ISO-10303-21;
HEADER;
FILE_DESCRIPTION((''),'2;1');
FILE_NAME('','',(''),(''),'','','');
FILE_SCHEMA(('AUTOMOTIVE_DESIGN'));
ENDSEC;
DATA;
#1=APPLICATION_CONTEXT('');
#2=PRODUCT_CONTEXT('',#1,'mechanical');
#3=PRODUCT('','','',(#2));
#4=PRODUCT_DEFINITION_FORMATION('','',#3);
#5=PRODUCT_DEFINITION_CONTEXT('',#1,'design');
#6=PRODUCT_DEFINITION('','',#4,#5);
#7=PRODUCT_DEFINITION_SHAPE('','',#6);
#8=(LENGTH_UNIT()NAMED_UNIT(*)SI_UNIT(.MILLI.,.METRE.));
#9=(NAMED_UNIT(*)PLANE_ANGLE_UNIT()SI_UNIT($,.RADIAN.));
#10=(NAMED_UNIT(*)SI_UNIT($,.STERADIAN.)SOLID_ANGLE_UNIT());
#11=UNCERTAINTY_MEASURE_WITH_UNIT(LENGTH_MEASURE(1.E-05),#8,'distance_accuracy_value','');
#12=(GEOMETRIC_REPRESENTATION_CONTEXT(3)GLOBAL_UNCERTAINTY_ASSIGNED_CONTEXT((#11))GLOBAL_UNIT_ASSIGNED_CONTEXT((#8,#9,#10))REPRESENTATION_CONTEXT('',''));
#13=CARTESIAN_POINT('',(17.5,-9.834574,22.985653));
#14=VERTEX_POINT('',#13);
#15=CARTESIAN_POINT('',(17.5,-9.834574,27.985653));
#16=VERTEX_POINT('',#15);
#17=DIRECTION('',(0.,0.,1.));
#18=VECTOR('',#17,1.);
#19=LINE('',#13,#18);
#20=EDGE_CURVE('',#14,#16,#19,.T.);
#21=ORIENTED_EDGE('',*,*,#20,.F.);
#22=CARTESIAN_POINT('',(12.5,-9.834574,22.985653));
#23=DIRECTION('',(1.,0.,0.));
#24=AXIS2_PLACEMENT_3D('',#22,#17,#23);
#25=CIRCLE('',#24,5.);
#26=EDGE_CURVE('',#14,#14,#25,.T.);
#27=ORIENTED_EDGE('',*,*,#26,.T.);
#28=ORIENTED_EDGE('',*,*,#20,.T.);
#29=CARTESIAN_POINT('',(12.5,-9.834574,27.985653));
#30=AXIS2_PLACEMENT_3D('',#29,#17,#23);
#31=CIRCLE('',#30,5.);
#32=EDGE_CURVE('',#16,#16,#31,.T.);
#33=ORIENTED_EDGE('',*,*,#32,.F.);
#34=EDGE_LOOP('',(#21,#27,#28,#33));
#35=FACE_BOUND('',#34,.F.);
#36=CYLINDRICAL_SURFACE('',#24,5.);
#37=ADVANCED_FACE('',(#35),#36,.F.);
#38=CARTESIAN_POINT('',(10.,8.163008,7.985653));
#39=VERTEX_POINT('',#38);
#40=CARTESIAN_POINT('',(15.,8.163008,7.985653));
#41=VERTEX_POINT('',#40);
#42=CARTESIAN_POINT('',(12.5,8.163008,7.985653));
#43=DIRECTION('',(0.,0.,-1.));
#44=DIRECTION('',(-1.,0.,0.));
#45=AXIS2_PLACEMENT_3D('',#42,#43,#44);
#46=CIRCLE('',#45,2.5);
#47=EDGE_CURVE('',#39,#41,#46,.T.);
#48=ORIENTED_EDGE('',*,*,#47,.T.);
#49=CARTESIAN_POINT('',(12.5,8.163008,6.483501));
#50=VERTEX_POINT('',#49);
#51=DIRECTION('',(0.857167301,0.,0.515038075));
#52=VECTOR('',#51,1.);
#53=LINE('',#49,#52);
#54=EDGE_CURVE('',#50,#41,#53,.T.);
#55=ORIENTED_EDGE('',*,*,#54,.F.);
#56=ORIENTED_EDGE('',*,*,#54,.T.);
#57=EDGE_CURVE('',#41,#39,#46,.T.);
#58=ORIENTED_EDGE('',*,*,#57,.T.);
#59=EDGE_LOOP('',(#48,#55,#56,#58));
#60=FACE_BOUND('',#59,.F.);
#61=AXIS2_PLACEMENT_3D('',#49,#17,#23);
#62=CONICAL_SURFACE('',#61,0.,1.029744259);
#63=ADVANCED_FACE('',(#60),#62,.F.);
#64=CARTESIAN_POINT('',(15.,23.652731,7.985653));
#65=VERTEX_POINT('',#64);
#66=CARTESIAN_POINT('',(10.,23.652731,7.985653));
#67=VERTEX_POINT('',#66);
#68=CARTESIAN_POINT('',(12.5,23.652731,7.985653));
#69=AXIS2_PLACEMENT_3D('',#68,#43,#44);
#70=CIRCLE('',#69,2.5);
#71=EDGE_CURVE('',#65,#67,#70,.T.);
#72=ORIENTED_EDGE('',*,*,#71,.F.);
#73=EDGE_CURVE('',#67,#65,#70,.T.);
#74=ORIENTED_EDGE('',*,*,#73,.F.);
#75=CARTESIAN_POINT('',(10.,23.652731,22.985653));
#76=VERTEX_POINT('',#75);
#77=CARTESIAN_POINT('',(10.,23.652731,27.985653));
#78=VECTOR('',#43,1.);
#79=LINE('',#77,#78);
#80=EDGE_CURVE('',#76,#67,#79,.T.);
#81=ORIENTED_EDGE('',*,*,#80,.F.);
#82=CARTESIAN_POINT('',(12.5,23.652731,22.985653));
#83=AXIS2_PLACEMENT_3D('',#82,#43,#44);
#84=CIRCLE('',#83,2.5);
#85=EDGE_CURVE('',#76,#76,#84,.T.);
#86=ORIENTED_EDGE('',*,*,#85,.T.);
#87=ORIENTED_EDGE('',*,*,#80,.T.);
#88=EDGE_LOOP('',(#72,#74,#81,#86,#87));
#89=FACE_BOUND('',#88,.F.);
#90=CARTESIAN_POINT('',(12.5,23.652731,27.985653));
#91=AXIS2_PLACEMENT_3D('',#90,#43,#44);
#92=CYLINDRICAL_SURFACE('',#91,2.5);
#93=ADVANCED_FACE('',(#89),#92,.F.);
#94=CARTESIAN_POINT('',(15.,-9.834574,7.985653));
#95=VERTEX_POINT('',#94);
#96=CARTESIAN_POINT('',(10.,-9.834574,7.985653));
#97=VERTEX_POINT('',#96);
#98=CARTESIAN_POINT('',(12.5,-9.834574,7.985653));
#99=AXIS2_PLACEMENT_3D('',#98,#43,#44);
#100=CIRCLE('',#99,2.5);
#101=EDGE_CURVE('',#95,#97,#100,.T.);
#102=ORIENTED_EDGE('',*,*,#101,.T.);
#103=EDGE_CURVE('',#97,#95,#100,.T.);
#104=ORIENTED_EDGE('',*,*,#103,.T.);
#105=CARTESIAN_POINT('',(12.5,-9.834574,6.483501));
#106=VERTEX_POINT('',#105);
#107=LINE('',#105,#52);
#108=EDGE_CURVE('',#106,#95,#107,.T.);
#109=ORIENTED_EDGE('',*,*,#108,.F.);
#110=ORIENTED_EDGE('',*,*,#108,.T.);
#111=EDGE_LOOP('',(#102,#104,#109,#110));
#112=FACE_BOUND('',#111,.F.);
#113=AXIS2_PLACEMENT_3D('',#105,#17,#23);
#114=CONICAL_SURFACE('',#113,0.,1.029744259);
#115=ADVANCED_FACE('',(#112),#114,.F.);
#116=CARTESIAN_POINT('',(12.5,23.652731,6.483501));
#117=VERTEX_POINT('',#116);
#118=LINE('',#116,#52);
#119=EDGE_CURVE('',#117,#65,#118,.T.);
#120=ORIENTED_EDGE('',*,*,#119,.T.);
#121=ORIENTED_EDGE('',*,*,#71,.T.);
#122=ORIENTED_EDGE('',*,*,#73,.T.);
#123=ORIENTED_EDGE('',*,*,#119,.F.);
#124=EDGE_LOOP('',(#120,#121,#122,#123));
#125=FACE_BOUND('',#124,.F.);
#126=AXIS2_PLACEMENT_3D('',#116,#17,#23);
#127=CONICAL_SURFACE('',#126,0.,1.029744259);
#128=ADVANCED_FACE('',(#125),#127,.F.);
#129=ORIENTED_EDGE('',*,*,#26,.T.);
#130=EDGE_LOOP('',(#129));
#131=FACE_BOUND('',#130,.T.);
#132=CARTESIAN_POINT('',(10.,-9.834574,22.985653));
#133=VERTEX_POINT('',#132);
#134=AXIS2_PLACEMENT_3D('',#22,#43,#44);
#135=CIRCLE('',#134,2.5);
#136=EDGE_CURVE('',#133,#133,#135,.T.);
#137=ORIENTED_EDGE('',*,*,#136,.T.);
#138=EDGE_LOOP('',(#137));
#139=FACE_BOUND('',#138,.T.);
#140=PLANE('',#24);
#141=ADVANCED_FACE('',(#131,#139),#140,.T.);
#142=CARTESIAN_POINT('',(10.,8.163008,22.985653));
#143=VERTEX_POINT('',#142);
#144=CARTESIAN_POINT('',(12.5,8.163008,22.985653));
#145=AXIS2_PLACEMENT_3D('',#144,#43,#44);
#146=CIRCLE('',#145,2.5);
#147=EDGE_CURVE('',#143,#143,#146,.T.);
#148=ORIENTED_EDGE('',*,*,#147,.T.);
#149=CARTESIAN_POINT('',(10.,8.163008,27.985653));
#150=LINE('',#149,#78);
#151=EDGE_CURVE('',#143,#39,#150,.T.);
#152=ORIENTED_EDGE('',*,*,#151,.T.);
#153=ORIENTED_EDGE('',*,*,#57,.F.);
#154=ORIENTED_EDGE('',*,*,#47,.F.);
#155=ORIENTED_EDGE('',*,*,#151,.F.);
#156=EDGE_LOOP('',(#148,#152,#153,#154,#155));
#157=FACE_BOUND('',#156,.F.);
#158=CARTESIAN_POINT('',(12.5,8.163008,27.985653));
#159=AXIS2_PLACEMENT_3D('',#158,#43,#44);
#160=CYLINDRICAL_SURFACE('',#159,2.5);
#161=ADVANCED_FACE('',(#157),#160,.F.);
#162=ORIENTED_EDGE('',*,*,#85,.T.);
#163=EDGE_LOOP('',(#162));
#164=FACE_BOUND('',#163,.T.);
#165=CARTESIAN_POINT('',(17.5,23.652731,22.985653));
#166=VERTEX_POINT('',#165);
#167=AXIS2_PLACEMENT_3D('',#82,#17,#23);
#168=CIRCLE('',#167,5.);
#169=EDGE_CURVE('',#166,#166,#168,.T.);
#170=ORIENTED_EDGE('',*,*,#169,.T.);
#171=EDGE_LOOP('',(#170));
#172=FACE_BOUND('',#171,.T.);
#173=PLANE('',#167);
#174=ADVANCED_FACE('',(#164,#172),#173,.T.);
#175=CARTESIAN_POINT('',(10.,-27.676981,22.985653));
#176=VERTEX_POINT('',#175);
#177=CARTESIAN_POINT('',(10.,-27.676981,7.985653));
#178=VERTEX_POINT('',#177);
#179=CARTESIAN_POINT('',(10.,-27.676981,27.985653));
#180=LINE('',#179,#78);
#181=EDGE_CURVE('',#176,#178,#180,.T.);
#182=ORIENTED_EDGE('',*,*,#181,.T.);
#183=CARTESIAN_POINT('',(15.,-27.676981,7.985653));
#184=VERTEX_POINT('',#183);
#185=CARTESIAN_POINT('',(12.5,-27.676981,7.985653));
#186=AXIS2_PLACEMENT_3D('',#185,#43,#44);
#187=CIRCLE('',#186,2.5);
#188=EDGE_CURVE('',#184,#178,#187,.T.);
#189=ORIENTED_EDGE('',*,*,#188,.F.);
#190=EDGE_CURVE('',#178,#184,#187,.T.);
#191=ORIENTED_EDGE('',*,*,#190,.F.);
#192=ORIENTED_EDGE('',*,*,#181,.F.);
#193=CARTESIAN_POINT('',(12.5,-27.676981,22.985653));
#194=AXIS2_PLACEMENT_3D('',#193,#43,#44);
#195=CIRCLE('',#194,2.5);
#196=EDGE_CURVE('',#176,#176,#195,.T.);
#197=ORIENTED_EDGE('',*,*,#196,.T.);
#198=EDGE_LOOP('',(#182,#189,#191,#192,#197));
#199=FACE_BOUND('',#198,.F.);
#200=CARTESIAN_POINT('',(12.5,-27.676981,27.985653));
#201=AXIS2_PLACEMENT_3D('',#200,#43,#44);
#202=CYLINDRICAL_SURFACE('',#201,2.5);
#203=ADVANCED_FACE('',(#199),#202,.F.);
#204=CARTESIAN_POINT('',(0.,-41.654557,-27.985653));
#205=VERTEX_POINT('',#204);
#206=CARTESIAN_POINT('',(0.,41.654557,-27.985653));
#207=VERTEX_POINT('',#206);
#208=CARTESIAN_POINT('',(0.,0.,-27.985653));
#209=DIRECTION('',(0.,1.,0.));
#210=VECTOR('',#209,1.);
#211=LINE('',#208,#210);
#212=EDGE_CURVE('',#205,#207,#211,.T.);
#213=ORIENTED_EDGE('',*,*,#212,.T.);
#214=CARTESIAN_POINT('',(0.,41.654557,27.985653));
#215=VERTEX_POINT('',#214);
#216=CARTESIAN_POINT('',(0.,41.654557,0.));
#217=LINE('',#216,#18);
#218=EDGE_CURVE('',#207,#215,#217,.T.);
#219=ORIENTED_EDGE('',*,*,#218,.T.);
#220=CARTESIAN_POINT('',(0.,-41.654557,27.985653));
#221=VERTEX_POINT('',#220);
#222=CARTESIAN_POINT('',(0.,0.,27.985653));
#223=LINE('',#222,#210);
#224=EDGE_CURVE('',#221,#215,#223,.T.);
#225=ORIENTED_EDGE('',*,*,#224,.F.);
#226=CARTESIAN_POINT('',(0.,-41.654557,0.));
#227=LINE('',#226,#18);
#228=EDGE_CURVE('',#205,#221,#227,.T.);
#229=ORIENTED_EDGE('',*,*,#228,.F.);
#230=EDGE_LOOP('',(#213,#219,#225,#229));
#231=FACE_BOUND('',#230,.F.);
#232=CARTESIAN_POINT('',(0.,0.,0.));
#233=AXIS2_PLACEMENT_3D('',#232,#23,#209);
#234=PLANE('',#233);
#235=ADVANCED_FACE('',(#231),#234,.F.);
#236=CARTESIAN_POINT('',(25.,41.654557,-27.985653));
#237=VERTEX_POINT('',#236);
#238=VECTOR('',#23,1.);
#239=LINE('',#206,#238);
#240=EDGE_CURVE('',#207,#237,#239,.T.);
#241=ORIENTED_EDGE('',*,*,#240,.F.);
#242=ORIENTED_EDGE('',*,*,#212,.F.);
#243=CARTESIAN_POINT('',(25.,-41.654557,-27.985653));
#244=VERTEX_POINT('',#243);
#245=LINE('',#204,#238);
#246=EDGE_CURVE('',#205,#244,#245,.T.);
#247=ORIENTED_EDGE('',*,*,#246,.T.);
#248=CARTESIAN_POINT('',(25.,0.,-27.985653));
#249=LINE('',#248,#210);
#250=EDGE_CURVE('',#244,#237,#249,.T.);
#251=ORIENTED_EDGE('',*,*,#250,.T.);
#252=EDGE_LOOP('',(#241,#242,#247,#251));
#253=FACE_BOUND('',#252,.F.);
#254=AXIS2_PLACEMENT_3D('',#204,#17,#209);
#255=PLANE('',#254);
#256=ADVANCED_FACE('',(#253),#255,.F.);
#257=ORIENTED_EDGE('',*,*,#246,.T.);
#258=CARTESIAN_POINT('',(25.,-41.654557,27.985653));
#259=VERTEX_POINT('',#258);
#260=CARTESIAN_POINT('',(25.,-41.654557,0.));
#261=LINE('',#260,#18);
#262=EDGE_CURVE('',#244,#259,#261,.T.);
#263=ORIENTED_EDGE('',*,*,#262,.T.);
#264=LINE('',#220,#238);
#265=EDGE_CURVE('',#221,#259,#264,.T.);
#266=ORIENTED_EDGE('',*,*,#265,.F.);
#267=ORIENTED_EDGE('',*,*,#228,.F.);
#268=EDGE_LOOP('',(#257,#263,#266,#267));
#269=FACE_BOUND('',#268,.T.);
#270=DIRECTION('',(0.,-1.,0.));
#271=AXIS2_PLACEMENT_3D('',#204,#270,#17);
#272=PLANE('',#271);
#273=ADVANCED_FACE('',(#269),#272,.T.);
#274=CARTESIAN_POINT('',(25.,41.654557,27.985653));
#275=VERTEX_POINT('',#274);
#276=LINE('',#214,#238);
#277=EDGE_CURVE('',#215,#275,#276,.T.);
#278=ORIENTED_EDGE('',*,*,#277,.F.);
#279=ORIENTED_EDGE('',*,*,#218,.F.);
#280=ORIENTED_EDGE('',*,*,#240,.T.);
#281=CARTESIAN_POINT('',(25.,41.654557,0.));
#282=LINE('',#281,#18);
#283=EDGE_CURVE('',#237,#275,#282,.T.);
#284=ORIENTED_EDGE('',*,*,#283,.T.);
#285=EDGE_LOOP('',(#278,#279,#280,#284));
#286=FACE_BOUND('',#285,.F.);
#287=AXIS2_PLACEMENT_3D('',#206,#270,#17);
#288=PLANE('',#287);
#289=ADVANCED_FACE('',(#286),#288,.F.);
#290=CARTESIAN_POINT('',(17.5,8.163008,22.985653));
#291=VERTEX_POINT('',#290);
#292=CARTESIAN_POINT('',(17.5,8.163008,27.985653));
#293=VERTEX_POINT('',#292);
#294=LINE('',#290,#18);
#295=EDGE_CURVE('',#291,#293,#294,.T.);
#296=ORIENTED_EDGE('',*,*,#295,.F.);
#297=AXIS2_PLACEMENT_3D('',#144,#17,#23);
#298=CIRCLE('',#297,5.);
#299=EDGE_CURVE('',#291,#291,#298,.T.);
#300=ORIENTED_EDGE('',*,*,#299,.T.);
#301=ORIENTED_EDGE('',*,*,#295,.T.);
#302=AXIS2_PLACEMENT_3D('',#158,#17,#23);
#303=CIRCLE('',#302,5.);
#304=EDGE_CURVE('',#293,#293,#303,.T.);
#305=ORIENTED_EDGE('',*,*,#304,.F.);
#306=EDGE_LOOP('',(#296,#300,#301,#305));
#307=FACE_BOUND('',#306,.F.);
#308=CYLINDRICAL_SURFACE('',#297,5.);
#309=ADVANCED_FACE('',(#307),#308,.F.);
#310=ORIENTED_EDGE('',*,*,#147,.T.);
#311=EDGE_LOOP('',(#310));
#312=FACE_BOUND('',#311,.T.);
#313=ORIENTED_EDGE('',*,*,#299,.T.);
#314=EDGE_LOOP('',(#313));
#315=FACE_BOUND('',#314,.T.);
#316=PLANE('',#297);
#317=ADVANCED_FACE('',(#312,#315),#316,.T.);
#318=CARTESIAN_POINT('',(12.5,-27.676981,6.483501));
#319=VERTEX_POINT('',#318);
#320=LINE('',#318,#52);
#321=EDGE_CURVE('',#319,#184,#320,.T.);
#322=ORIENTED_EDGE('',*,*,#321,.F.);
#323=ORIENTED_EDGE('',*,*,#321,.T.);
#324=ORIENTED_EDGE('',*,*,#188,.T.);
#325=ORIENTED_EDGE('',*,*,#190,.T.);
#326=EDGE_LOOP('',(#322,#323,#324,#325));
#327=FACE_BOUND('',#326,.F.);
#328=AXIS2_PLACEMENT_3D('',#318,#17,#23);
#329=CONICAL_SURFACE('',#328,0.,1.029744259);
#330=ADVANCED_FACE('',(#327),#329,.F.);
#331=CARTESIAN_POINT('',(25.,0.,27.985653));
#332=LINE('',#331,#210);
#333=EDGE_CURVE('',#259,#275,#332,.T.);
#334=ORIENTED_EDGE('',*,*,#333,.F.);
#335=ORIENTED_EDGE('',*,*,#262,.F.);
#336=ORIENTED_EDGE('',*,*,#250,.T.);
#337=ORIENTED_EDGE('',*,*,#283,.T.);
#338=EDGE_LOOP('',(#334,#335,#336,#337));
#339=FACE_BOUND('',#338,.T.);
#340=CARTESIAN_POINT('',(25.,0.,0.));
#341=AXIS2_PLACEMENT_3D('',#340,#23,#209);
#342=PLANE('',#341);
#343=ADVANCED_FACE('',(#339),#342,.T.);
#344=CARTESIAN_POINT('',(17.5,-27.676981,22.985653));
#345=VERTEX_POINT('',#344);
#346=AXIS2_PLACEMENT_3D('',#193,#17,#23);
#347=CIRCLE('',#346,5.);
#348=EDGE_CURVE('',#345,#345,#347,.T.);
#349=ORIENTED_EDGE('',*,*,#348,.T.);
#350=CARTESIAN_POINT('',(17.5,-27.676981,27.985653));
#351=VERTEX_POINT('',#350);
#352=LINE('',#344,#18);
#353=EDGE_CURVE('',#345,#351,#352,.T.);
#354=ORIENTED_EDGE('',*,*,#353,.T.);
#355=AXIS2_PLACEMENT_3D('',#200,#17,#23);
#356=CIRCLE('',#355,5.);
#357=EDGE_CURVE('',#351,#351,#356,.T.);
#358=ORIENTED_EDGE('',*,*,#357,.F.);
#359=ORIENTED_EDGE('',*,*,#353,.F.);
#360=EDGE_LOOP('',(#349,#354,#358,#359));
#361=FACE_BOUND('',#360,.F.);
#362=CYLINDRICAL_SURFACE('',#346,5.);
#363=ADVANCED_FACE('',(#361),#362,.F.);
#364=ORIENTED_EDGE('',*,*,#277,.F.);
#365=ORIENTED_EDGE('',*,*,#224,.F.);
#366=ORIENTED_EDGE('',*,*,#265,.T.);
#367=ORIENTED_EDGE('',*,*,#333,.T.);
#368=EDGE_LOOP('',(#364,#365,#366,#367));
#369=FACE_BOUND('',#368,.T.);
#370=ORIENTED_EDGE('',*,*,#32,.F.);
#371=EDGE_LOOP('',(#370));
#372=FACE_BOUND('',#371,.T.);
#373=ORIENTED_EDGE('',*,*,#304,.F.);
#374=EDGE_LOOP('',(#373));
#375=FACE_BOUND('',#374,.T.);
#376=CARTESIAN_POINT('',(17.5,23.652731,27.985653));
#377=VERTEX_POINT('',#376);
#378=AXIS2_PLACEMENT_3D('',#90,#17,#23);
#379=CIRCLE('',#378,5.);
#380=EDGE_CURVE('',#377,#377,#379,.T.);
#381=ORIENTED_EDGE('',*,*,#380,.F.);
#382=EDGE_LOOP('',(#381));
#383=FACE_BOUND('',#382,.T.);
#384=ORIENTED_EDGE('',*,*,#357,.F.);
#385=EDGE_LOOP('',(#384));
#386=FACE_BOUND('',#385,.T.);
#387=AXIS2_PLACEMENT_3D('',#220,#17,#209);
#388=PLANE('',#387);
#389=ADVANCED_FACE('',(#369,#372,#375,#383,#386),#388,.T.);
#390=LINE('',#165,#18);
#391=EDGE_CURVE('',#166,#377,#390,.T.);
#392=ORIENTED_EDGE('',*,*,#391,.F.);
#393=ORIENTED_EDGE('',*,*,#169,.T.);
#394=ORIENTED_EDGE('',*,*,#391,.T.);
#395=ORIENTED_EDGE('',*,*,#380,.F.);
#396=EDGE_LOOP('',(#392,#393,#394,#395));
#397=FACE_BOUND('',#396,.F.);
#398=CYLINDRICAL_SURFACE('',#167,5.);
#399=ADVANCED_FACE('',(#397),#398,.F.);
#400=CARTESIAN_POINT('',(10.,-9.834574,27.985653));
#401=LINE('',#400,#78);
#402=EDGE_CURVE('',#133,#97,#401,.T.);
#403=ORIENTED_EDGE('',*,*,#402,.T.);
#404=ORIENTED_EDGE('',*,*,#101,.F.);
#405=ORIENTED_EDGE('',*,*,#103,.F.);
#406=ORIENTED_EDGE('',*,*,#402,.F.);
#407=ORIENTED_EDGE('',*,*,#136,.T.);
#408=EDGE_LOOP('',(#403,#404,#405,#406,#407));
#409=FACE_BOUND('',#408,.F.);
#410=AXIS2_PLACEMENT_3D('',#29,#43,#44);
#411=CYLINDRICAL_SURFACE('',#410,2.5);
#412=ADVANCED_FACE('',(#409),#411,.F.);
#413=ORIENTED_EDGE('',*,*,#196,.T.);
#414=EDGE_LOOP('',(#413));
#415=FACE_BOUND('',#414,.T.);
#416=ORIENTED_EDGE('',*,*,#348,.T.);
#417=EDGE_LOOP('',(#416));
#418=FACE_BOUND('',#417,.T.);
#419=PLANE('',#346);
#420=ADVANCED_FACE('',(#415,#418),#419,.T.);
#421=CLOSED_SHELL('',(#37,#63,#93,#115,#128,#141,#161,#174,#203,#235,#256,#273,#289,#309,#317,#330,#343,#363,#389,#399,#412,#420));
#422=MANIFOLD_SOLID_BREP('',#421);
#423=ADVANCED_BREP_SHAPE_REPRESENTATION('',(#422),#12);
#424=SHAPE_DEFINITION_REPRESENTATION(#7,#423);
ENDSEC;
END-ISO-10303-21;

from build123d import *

# Parameters (mm, degrees)
F0_W           = 83.3091139793
F0_H           = 55.9713058174
F1_DEPTH       = 25
F3_D           = 5
F3_DEPTH       = 20
F3_CBORE_D     = 10
F3_CBORE_DEPTH = 5
F3_TIP         = 1.5021515476


with BuildPart() as f1:
    # F0 (on Right) → F1 (new body)
    with BuildSketch(Plane.YZ):
        Rectangle(F0_W, F0_H)
    extrude(amount=F1_DEPTH)

    # F3
    with Locations(Plane.XY.offset(27.9856529087)):
        with Locations((12.5, -27.6769809425), (12.5, -9.8345736042), (12.5, 8.1630079076), (12.5, 23.6527305096)):
            CounterBoreHole(F3_D / 2, F3_CBORE_D / 2, F3_CBORE_DEPTH, depth=F3_DEPTH)
            with Locations((0, 0, -(F3_DEPTH + F3_TIP / 2))):  # 118° drill point
                Cone(0, F3_D / 2, F3_TIP, mode=Mode.SUBTRACT)


solid = f1.part
